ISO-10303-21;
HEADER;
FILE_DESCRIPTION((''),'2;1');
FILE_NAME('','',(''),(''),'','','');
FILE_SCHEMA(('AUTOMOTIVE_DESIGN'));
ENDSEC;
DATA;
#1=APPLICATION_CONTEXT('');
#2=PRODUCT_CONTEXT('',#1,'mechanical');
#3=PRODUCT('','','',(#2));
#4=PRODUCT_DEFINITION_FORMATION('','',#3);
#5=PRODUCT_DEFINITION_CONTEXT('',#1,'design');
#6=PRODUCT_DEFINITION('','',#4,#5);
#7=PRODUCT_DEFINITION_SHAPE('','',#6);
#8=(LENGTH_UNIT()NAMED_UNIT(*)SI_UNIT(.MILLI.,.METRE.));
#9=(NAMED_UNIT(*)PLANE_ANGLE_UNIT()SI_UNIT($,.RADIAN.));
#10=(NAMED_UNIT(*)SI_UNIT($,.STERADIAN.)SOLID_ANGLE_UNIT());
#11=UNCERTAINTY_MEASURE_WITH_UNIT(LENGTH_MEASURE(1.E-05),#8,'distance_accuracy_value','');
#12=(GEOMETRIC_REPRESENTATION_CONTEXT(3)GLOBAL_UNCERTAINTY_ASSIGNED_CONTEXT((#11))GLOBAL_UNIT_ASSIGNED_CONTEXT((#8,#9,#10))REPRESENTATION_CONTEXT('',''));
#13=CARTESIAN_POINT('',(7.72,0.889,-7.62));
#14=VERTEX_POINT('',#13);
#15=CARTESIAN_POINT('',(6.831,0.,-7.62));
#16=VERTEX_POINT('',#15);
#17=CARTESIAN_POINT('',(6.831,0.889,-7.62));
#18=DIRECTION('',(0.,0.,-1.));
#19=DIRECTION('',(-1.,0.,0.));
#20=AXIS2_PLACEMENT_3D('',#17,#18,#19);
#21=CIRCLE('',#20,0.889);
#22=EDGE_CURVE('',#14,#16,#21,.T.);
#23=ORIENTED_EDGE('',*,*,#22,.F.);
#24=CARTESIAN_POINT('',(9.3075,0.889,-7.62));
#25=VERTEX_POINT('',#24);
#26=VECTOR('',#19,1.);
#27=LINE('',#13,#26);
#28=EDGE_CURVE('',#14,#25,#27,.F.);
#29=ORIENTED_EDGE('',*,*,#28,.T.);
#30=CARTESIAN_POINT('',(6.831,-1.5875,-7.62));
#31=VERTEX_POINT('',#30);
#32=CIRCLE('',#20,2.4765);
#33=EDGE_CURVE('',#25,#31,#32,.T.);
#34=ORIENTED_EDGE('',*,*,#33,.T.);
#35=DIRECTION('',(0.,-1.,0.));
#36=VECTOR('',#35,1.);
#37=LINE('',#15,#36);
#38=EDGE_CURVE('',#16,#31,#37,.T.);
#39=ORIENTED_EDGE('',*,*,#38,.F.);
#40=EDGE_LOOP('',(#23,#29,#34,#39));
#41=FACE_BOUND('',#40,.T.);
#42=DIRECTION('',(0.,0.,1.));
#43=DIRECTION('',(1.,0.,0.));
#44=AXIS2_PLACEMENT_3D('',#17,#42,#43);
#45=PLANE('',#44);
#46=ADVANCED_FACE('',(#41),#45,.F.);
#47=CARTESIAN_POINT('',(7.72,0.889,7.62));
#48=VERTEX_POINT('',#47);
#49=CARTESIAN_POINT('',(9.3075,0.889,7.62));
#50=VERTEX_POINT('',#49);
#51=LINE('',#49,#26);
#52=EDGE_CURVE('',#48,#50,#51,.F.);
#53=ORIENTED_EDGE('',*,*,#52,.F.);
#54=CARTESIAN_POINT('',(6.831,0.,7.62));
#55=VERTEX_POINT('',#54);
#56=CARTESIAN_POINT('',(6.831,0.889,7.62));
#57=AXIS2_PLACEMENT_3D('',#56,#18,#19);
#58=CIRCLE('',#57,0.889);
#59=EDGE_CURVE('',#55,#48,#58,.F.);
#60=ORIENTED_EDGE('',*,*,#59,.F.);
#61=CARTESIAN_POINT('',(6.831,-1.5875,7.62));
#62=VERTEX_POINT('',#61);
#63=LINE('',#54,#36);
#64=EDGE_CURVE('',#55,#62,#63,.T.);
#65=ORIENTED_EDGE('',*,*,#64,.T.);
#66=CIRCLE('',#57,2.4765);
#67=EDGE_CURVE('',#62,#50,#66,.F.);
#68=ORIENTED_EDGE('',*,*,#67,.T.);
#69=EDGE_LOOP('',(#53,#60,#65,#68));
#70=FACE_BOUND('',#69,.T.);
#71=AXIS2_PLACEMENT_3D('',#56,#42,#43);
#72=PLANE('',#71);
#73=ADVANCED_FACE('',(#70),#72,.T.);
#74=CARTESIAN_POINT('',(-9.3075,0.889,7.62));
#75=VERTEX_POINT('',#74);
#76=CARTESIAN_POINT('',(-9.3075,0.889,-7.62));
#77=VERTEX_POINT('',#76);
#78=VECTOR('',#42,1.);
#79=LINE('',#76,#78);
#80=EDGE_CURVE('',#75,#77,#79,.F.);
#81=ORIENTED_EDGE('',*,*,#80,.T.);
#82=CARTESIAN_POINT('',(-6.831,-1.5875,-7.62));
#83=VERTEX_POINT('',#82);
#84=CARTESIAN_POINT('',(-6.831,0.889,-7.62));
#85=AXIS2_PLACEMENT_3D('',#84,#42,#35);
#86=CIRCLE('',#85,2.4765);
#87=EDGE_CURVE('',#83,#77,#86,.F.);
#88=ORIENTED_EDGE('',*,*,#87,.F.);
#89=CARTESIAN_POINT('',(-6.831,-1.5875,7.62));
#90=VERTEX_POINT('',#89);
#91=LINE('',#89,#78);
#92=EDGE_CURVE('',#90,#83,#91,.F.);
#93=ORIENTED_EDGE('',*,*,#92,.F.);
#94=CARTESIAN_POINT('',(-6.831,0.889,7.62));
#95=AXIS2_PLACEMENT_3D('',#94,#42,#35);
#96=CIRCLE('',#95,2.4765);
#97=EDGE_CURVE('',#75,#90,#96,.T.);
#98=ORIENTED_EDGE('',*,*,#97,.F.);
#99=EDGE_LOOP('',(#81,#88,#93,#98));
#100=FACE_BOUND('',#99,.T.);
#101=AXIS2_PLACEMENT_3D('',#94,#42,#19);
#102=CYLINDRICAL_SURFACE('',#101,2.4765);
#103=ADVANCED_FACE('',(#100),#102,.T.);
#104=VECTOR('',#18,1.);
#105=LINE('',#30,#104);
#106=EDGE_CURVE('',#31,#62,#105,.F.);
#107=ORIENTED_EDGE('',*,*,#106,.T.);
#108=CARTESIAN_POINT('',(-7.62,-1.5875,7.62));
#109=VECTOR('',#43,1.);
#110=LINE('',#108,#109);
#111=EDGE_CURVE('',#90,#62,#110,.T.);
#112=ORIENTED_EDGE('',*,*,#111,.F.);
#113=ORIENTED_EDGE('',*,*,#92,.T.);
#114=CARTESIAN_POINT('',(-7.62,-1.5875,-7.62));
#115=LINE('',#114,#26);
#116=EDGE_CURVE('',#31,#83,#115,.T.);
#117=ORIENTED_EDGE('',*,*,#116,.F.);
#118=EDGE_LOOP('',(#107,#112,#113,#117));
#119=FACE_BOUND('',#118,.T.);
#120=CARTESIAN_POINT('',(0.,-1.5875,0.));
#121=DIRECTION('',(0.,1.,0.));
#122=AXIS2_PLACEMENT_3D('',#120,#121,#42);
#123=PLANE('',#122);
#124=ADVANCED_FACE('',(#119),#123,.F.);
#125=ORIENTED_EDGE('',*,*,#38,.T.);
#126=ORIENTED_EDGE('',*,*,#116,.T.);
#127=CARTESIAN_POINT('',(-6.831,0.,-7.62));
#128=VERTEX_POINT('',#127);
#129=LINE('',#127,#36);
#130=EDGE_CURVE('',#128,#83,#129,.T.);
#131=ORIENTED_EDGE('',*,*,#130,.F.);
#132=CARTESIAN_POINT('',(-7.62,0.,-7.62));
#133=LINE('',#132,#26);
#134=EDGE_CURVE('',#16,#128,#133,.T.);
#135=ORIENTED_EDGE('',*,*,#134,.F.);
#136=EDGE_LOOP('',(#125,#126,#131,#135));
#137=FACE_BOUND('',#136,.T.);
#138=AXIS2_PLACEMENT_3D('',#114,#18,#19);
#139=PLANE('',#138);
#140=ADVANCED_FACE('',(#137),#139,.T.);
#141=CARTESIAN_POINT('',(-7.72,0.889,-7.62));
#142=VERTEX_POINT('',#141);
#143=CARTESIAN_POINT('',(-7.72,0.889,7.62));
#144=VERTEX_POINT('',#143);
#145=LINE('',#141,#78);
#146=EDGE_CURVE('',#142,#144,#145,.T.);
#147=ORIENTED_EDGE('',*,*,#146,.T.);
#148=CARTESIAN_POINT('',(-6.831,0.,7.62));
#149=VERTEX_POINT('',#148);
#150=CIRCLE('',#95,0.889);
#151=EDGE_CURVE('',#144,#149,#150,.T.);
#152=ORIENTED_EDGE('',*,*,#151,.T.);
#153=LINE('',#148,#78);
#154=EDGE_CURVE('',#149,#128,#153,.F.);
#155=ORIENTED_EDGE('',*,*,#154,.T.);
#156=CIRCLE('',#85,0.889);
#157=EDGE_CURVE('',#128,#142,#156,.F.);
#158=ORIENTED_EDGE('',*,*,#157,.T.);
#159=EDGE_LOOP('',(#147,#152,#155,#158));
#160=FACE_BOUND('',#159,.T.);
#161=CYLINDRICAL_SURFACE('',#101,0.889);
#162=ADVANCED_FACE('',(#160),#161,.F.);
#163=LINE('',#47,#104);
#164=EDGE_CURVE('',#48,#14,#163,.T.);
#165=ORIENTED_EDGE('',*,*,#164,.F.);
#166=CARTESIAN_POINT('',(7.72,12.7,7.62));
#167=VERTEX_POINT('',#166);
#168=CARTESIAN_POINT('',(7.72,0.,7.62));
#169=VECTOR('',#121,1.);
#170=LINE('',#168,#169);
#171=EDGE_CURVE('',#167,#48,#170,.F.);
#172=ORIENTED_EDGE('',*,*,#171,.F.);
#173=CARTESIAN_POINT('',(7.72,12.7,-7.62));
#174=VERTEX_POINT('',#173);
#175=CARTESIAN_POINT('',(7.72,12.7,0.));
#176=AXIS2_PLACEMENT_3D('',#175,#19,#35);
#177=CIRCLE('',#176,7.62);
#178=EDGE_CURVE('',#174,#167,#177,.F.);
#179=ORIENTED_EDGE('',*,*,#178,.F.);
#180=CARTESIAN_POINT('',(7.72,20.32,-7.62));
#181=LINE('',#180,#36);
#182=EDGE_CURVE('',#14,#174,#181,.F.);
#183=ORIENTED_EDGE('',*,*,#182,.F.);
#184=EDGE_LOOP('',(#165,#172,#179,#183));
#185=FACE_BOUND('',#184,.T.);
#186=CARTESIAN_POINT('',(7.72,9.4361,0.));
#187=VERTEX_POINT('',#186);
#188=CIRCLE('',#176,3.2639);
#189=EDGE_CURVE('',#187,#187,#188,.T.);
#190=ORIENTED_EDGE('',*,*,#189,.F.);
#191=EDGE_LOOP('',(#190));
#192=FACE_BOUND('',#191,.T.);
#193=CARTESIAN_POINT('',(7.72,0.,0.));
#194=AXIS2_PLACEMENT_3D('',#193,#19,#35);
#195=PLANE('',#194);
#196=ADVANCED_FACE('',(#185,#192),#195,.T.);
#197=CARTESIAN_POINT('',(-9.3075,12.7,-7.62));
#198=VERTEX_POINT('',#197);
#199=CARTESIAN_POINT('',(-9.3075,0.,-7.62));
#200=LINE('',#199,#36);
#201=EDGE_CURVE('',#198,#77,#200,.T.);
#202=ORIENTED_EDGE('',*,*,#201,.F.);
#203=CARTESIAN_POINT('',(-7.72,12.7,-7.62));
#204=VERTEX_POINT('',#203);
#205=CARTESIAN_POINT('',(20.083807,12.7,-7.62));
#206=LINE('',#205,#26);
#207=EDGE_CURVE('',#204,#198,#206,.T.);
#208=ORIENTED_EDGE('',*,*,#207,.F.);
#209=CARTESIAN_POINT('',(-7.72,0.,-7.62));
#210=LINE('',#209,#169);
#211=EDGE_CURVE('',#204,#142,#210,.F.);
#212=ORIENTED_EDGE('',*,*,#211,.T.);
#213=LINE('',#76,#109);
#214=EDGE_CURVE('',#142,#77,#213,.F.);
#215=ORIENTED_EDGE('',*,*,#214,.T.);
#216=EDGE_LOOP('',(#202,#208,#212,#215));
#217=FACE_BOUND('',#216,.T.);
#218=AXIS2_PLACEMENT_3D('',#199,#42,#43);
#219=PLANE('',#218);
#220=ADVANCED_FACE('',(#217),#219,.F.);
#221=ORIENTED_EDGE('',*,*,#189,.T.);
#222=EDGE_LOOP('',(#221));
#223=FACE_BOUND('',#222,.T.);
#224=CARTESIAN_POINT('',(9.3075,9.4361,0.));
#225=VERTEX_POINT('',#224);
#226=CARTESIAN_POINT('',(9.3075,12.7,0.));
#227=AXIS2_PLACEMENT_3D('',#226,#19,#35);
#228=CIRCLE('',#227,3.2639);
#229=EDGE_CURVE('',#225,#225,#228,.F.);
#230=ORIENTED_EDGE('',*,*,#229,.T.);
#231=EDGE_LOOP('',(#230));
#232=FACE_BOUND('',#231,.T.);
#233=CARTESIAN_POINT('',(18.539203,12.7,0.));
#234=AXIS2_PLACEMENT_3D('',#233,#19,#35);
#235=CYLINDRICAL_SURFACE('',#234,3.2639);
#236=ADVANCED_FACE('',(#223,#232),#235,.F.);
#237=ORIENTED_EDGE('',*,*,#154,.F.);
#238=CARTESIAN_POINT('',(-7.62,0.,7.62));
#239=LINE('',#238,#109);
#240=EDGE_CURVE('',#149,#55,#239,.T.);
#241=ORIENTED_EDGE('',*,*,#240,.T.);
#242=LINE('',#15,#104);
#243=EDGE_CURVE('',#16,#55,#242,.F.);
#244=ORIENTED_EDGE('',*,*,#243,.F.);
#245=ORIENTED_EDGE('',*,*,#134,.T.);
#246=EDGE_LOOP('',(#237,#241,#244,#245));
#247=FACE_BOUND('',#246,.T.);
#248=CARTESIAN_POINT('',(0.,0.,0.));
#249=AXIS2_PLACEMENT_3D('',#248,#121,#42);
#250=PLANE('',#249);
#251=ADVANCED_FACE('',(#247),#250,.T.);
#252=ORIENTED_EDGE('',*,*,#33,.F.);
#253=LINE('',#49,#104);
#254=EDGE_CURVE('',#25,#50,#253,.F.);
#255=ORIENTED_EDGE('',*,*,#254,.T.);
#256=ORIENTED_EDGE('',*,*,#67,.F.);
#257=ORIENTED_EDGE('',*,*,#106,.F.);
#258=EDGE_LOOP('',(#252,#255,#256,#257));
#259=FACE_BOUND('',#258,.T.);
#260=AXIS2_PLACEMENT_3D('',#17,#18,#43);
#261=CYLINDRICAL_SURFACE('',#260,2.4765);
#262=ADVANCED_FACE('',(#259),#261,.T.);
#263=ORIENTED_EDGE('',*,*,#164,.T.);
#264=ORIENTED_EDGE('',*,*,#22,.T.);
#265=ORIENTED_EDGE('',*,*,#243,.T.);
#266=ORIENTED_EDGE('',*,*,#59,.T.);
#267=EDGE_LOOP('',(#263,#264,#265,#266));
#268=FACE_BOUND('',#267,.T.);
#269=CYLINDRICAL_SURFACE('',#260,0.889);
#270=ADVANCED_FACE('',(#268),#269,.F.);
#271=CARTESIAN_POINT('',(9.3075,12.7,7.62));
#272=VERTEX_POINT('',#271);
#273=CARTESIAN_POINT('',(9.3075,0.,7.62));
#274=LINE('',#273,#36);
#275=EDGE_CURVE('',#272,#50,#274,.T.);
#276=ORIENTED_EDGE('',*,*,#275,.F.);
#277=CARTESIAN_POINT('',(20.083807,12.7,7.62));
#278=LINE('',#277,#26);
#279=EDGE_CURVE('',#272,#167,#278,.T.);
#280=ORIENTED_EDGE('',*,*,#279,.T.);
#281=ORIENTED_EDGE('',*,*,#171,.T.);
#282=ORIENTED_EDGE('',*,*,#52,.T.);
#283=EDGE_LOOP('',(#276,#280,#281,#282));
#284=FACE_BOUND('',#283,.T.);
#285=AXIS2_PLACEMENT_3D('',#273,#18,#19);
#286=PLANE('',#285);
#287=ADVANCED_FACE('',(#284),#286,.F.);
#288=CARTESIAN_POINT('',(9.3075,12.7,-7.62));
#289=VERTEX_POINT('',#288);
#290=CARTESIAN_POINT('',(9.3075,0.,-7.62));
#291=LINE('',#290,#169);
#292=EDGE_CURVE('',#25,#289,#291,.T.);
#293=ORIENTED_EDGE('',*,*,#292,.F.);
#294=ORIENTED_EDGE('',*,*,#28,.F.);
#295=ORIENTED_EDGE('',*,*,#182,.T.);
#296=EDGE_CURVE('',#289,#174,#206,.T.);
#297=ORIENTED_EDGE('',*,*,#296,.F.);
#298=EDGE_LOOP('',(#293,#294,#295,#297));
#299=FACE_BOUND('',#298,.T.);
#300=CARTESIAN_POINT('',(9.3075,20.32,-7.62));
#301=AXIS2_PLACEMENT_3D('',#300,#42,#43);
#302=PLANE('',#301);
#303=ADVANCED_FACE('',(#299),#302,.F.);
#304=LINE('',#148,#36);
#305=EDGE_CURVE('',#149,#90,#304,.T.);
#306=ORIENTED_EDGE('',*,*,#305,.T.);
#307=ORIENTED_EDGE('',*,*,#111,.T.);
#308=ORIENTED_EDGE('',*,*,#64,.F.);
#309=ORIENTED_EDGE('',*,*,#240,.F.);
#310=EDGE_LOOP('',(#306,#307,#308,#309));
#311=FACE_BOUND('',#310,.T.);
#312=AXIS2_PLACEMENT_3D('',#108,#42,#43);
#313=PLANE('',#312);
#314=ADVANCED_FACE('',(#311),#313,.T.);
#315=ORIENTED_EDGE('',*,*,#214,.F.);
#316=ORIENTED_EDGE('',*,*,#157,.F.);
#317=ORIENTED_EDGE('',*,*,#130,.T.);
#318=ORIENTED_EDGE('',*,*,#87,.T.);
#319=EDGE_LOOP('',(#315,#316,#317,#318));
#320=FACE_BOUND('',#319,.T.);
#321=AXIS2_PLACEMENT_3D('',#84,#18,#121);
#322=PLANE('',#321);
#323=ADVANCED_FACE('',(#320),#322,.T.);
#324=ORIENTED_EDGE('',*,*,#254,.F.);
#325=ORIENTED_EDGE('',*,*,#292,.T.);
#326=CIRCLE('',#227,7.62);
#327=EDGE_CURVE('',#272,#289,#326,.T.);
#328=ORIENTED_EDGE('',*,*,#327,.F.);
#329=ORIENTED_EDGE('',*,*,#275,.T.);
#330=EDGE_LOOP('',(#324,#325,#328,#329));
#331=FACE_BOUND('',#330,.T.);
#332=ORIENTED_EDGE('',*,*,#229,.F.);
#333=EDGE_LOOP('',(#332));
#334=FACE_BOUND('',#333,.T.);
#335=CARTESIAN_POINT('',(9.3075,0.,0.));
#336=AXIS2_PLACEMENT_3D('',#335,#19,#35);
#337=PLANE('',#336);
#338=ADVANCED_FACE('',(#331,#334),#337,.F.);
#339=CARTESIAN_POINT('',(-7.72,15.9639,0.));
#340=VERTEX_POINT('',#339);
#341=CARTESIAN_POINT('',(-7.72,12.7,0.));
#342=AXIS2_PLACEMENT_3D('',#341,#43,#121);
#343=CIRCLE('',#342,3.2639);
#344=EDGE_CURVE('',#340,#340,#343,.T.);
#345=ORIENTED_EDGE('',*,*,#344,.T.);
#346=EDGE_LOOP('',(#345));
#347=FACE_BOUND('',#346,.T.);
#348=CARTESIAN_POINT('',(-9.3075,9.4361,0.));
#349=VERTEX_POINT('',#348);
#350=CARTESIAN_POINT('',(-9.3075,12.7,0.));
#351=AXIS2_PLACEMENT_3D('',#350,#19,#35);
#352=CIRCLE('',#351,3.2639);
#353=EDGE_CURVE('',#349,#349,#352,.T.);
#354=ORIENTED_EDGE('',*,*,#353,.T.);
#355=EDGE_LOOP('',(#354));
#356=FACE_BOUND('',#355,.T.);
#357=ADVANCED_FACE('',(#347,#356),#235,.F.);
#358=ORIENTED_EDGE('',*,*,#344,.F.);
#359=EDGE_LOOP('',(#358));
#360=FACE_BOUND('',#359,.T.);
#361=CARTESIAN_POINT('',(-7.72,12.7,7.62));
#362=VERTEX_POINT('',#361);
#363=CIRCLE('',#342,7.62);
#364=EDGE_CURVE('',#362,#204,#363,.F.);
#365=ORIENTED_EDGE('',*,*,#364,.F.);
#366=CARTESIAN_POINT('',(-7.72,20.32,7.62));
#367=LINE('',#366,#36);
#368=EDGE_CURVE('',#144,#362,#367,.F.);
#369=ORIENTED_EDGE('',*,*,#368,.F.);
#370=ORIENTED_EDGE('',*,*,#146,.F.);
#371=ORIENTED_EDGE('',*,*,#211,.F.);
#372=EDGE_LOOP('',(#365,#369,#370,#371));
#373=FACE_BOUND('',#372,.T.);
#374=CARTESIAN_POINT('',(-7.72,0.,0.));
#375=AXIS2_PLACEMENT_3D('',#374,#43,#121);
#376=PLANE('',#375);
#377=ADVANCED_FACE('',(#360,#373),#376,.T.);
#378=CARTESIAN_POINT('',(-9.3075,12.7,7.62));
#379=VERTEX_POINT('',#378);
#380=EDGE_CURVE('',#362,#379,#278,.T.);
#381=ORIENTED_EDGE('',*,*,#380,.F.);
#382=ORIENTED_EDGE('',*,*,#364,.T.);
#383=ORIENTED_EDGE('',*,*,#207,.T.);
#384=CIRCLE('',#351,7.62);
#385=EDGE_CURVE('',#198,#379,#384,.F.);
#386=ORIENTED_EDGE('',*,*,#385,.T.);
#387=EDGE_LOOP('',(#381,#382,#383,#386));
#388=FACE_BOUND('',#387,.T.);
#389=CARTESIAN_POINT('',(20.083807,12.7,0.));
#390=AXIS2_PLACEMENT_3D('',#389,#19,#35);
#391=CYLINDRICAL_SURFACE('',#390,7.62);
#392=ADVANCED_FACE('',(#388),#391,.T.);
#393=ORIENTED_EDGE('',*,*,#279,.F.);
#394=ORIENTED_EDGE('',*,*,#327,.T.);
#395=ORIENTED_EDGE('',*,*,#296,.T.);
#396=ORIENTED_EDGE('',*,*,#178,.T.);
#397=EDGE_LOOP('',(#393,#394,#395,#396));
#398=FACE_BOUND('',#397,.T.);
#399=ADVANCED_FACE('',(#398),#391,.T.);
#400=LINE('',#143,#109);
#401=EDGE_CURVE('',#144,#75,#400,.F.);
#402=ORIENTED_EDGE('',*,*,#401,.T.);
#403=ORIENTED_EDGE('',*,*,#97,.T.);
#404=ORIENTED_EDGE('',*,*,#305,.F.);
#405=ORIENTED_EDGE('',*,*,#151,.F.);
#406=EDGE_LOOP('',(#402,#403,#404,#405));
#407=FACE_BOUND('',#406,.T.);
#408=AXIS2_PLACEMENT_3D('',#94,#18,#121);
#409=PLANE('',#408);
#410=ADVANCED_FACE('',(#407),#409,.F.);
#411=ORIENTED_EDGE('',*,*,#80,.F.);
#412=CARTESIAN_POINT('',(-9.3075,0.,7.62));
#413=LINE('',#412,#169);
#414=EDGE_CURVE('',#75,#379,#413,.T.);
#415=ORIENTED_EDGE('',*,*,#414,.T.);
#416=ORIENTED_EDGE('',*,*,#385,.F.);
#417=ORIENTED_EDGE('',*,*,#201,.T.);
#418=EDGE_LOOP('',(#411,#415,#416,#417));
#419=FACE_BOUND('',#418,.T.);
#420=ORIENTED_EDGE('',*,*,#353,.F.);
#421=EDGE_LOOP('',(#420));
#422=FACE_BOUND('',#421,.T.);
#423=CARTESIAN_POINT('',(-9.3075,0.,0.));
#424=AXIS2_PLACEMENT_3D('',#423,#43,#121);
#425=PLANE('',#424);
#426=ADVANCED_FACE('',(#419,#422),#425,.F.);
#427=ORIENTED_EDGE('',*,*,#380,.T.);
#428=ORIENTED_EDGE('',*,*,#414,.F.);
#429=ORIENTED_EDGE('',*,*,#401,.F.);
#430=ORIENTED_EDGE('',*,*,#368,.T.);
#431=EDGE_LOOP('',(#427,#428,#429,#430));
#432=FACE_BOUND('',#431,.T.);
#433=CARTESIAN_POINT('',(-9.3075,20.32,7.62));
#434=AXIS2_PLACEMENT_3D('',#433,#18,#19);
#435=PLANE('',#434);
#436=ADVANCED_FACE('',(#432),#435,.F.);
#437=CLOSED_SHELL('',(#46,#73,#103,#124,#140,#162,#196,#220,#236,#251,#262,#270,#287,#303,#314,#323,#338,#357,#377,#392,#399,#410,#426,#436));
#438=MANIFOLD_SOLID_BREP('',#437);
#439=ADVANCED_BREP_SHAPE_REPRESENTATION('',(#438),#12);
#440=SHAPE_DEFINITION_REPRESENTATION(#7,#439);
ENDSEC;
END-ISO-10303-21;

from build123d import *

# Parameters (mm, degrees)
SKETCH1_W                      = 15.24
SKETCH1_H                      = 15.24
BASE_FLANGE1_DEPTH             = 1.5875
EDGE_FLANGE1_STRIP_W           = 8.228
EDGE_FLANGE1_STRIP_H           = 1.5875
EDGE_FLANGE1_STRIP_CUT_DEPTH   = 15.24
EDGE_FLANGE1_STRIP_2_W         = 8.228
EDGE_FLANGE1_STRIP_2_H         = 1.5875
EDGE_FLANGE1_STRIP_CUT_2_DEPTH = 15.24
EDGE_FLANGE1_DEPTH             = 15.24
EDGE_FLANGE1_BEND_DEPTH        = 15.24
CUT_EXTRUDE2_REACH             = 30.592
CUT_EXTRUDE1_REACH             = 30.592
SKETCH13_R                     = 3.2639


# Sheet-metal steps are written as plain solids
with BuildPart() as part:
    # Sketch1 → Base-Flange1 (new body)
    with BuildSketch(Plane(origin=(0, 0, 0), x_dir=(1, 0, 0), z_dir=(0, 1, 0))):
        Rectangle(SKETCH1_W, SKETCH1_H)
    extrude(amount=-BASE_FLANGE1_DEPTH)

    # Edge-Flange1 strip (across the edge) → Edge-Flange1 strip cut (cut)
    with BuildSketch(Plane(origin=(-7.72, 0, -7.62), x_dir=(1, 0, 0), z_dir=(0, 0, 1))):
        with Locations((-3.225, -0.79375)):
            Rectangle(EDGE_FLANGE1_STRIP_W, EDGE_FLANGE1_STRIP_H)
    extrude(amount=EDGE_FLANGE1_STRIP_CUT_DEPTH, mode=Mode.SUBTRACT)

    # Edge-Flange1 strip 2 (across the edge) → Edge-Flange1 strip cut 2 (cut)
    with BuildSketch(Plane(origin=(7.72, 0, 7.62), x_dir=(-1, 0, 0), z_dir=(0, 0, -1))):
        with Locations((-3.225, -0.79375)):
            Rectangle(EDGE_FLANGE1_STRIP_2_W, EDGE_FLANGE1_STRIP_2_H)
    extrude(amount=EDGE_FLANGE1_STRIP_CUT_2_DEPTH, mode=Mode.SUBTRACT)

    # Edge-Flange1 section (across the edge) → Edge-Flange1 (add)
    with BuildSketch(Plane(origin=(-7.72, 0, -7.62), x_dir=(1, 0, 0), z_dir=(0, 0, 1))):
        with BuildLine():
            Line((-1.5875, 0.889), (-1.5875, 20.32))
            Line((-1.5875, 20.32), (0, 20.32))
            Line((0, 20.32), (0, 0.889))
            ThreePointArc((0, 0.889), (0.260382072, 0.260382072), (0.889, 0))
            Line((0.889, 0), (0.889, -1.5875))
            ThreePointArc((0.889, -1.5875), (-0.862149944, -0.862149944), (-1.5875, 0.889))
        make_face()
    extrude(amount=EDGE_FLANGE1_DEPTH)

    # Edge-Flange1 section 2 (across the edge) → Edge-Flange1 bend (add)
    with BuildSketch(Plane(origin=(7.72, 0, 7.62), x_dir=(-1, 0, 0), z_dir=(0, 0, -1))):
        with BuildLine():
            Line((-1.5875, 0.889), (-1.5875, 20.32))
            Line((-1.5875, 20.32), (0, 20.32))
            Line((0, 20.32), (0, 0.889))
            ThreePointArc((0, 0.889), (0.260382072, 0.260382072), (0.889, 0))
            Line((0.889, 0), (0.889, -1.5875))
            ThreePointArc((0.889, -1.5875), (-0.862149944, -0.862149944), (-1.5875, 0.889))
        make_face()
    extrude(amount=EDGE_FLANGE1_BEND_DEPTH)

    # Cut-Extrude2: up to this face of the body (flat: up to its plane)
    cut_extrude2_end = Plane(part.part.faces().sort_by_distance((9.3075, 10.6045, 0))[0])
    # Sketch14 → Cut-Extrude2 (cut, up to the picked face)
    with BuildSketch(Plane.ZY.offset(9.3075), mode=Mode.PRIVATE) as cut_extrude2_sk1:
        with BuildLine():
            Line((-7.62, 20.32), (-7.62, 12.7))
            ThreePointArc((-7.62, 12.7), (-5.388153673, 18.088153673), (0, 20.32))
            Line((0, 20.32), (-7.62, 20.32))
        make_face()
    cut_extrude2_tool1 = split(extrude(cut_extrude2_sk1.sketch, amount=-CUT_EXTRUDE2_REACH, mode=Mode.PRIVATE), bisect_by=cut_extrude2_end, keep=Keep.BOTH, mode=Mode.PRIVATE)
    # Sketch14 → Cut-Extrude2 (cut, up to the picked face)
    with BuildSketch(Plane.ZY.offset(9.3075), mode=Mode.PRIVATE) as cut_extrude2_sk2:
        with BuildLine():
            Line((7.62, 20.32), (0, 20.32))
            ThreePointArc((0, 20.32), (5.388153673, 18.088153673), (7.62, 12.7))
            Line((7.62, 12.7), (7.62, 20.32))
        make_face()
    cut_extrude2_tool2 = split(extrude(cut_extrude2_sk2.sketch, amount=-CUT_EXTRUDE2_REACH, mode=Mode.PRIVATE), bisect_by=cut_extrude2_end, keep=Keep.BOTH, mode=Mode.PRIVATE)
    add(cut_extrude2_tool1.solids().sort_by(Axis((-9.3075, 18.617936, -5.917936), (1, 0, 0)))[0], mode=Mode.SUBTRACT)
    add(cut_extrude2_tool2.solids().sort_by(Axis((-9.3075, 18.617936, 5.917936), (1, 0, 0)))[0], mode=Mode.SUBTRACT)

    # Cut-Extrude1: up to this face of the body (flat: up to its plane)
    cut_extrude1_end = Plane(part.part.faces().sort_by_distance((9.3075, 9.868138134, 0))[0])
    # Sketch13 → Cut-Extrude1 (cut, up to the picked face)
    with BuildSketch(Plane.ZY.offset(9.3075), mode=Mode.PRIVATE) as cut_extrude1_sk1:
        with Locations(Location((0, 12.7, 0), (0, 0, 270))):
            Circle(SKETCH13_R)
    cut_extrude1_tool1 = split(extrude(cut_extrude1_sk1.sketch, amount=-CUT_EXTRUDE1_REACH, mode=Mode.PRIVATE), bisect_by=cut_extrude1_end, keep=Keep.BOTH, mode=Mode.PRIVATE)
    add(cut_extrude1_tool1.solids().sort_by(Axis((-9.3075, 12.7, 0), (1, 0, 0)))[0], mode=Mode.SUBTRACT)


solid = part.part
